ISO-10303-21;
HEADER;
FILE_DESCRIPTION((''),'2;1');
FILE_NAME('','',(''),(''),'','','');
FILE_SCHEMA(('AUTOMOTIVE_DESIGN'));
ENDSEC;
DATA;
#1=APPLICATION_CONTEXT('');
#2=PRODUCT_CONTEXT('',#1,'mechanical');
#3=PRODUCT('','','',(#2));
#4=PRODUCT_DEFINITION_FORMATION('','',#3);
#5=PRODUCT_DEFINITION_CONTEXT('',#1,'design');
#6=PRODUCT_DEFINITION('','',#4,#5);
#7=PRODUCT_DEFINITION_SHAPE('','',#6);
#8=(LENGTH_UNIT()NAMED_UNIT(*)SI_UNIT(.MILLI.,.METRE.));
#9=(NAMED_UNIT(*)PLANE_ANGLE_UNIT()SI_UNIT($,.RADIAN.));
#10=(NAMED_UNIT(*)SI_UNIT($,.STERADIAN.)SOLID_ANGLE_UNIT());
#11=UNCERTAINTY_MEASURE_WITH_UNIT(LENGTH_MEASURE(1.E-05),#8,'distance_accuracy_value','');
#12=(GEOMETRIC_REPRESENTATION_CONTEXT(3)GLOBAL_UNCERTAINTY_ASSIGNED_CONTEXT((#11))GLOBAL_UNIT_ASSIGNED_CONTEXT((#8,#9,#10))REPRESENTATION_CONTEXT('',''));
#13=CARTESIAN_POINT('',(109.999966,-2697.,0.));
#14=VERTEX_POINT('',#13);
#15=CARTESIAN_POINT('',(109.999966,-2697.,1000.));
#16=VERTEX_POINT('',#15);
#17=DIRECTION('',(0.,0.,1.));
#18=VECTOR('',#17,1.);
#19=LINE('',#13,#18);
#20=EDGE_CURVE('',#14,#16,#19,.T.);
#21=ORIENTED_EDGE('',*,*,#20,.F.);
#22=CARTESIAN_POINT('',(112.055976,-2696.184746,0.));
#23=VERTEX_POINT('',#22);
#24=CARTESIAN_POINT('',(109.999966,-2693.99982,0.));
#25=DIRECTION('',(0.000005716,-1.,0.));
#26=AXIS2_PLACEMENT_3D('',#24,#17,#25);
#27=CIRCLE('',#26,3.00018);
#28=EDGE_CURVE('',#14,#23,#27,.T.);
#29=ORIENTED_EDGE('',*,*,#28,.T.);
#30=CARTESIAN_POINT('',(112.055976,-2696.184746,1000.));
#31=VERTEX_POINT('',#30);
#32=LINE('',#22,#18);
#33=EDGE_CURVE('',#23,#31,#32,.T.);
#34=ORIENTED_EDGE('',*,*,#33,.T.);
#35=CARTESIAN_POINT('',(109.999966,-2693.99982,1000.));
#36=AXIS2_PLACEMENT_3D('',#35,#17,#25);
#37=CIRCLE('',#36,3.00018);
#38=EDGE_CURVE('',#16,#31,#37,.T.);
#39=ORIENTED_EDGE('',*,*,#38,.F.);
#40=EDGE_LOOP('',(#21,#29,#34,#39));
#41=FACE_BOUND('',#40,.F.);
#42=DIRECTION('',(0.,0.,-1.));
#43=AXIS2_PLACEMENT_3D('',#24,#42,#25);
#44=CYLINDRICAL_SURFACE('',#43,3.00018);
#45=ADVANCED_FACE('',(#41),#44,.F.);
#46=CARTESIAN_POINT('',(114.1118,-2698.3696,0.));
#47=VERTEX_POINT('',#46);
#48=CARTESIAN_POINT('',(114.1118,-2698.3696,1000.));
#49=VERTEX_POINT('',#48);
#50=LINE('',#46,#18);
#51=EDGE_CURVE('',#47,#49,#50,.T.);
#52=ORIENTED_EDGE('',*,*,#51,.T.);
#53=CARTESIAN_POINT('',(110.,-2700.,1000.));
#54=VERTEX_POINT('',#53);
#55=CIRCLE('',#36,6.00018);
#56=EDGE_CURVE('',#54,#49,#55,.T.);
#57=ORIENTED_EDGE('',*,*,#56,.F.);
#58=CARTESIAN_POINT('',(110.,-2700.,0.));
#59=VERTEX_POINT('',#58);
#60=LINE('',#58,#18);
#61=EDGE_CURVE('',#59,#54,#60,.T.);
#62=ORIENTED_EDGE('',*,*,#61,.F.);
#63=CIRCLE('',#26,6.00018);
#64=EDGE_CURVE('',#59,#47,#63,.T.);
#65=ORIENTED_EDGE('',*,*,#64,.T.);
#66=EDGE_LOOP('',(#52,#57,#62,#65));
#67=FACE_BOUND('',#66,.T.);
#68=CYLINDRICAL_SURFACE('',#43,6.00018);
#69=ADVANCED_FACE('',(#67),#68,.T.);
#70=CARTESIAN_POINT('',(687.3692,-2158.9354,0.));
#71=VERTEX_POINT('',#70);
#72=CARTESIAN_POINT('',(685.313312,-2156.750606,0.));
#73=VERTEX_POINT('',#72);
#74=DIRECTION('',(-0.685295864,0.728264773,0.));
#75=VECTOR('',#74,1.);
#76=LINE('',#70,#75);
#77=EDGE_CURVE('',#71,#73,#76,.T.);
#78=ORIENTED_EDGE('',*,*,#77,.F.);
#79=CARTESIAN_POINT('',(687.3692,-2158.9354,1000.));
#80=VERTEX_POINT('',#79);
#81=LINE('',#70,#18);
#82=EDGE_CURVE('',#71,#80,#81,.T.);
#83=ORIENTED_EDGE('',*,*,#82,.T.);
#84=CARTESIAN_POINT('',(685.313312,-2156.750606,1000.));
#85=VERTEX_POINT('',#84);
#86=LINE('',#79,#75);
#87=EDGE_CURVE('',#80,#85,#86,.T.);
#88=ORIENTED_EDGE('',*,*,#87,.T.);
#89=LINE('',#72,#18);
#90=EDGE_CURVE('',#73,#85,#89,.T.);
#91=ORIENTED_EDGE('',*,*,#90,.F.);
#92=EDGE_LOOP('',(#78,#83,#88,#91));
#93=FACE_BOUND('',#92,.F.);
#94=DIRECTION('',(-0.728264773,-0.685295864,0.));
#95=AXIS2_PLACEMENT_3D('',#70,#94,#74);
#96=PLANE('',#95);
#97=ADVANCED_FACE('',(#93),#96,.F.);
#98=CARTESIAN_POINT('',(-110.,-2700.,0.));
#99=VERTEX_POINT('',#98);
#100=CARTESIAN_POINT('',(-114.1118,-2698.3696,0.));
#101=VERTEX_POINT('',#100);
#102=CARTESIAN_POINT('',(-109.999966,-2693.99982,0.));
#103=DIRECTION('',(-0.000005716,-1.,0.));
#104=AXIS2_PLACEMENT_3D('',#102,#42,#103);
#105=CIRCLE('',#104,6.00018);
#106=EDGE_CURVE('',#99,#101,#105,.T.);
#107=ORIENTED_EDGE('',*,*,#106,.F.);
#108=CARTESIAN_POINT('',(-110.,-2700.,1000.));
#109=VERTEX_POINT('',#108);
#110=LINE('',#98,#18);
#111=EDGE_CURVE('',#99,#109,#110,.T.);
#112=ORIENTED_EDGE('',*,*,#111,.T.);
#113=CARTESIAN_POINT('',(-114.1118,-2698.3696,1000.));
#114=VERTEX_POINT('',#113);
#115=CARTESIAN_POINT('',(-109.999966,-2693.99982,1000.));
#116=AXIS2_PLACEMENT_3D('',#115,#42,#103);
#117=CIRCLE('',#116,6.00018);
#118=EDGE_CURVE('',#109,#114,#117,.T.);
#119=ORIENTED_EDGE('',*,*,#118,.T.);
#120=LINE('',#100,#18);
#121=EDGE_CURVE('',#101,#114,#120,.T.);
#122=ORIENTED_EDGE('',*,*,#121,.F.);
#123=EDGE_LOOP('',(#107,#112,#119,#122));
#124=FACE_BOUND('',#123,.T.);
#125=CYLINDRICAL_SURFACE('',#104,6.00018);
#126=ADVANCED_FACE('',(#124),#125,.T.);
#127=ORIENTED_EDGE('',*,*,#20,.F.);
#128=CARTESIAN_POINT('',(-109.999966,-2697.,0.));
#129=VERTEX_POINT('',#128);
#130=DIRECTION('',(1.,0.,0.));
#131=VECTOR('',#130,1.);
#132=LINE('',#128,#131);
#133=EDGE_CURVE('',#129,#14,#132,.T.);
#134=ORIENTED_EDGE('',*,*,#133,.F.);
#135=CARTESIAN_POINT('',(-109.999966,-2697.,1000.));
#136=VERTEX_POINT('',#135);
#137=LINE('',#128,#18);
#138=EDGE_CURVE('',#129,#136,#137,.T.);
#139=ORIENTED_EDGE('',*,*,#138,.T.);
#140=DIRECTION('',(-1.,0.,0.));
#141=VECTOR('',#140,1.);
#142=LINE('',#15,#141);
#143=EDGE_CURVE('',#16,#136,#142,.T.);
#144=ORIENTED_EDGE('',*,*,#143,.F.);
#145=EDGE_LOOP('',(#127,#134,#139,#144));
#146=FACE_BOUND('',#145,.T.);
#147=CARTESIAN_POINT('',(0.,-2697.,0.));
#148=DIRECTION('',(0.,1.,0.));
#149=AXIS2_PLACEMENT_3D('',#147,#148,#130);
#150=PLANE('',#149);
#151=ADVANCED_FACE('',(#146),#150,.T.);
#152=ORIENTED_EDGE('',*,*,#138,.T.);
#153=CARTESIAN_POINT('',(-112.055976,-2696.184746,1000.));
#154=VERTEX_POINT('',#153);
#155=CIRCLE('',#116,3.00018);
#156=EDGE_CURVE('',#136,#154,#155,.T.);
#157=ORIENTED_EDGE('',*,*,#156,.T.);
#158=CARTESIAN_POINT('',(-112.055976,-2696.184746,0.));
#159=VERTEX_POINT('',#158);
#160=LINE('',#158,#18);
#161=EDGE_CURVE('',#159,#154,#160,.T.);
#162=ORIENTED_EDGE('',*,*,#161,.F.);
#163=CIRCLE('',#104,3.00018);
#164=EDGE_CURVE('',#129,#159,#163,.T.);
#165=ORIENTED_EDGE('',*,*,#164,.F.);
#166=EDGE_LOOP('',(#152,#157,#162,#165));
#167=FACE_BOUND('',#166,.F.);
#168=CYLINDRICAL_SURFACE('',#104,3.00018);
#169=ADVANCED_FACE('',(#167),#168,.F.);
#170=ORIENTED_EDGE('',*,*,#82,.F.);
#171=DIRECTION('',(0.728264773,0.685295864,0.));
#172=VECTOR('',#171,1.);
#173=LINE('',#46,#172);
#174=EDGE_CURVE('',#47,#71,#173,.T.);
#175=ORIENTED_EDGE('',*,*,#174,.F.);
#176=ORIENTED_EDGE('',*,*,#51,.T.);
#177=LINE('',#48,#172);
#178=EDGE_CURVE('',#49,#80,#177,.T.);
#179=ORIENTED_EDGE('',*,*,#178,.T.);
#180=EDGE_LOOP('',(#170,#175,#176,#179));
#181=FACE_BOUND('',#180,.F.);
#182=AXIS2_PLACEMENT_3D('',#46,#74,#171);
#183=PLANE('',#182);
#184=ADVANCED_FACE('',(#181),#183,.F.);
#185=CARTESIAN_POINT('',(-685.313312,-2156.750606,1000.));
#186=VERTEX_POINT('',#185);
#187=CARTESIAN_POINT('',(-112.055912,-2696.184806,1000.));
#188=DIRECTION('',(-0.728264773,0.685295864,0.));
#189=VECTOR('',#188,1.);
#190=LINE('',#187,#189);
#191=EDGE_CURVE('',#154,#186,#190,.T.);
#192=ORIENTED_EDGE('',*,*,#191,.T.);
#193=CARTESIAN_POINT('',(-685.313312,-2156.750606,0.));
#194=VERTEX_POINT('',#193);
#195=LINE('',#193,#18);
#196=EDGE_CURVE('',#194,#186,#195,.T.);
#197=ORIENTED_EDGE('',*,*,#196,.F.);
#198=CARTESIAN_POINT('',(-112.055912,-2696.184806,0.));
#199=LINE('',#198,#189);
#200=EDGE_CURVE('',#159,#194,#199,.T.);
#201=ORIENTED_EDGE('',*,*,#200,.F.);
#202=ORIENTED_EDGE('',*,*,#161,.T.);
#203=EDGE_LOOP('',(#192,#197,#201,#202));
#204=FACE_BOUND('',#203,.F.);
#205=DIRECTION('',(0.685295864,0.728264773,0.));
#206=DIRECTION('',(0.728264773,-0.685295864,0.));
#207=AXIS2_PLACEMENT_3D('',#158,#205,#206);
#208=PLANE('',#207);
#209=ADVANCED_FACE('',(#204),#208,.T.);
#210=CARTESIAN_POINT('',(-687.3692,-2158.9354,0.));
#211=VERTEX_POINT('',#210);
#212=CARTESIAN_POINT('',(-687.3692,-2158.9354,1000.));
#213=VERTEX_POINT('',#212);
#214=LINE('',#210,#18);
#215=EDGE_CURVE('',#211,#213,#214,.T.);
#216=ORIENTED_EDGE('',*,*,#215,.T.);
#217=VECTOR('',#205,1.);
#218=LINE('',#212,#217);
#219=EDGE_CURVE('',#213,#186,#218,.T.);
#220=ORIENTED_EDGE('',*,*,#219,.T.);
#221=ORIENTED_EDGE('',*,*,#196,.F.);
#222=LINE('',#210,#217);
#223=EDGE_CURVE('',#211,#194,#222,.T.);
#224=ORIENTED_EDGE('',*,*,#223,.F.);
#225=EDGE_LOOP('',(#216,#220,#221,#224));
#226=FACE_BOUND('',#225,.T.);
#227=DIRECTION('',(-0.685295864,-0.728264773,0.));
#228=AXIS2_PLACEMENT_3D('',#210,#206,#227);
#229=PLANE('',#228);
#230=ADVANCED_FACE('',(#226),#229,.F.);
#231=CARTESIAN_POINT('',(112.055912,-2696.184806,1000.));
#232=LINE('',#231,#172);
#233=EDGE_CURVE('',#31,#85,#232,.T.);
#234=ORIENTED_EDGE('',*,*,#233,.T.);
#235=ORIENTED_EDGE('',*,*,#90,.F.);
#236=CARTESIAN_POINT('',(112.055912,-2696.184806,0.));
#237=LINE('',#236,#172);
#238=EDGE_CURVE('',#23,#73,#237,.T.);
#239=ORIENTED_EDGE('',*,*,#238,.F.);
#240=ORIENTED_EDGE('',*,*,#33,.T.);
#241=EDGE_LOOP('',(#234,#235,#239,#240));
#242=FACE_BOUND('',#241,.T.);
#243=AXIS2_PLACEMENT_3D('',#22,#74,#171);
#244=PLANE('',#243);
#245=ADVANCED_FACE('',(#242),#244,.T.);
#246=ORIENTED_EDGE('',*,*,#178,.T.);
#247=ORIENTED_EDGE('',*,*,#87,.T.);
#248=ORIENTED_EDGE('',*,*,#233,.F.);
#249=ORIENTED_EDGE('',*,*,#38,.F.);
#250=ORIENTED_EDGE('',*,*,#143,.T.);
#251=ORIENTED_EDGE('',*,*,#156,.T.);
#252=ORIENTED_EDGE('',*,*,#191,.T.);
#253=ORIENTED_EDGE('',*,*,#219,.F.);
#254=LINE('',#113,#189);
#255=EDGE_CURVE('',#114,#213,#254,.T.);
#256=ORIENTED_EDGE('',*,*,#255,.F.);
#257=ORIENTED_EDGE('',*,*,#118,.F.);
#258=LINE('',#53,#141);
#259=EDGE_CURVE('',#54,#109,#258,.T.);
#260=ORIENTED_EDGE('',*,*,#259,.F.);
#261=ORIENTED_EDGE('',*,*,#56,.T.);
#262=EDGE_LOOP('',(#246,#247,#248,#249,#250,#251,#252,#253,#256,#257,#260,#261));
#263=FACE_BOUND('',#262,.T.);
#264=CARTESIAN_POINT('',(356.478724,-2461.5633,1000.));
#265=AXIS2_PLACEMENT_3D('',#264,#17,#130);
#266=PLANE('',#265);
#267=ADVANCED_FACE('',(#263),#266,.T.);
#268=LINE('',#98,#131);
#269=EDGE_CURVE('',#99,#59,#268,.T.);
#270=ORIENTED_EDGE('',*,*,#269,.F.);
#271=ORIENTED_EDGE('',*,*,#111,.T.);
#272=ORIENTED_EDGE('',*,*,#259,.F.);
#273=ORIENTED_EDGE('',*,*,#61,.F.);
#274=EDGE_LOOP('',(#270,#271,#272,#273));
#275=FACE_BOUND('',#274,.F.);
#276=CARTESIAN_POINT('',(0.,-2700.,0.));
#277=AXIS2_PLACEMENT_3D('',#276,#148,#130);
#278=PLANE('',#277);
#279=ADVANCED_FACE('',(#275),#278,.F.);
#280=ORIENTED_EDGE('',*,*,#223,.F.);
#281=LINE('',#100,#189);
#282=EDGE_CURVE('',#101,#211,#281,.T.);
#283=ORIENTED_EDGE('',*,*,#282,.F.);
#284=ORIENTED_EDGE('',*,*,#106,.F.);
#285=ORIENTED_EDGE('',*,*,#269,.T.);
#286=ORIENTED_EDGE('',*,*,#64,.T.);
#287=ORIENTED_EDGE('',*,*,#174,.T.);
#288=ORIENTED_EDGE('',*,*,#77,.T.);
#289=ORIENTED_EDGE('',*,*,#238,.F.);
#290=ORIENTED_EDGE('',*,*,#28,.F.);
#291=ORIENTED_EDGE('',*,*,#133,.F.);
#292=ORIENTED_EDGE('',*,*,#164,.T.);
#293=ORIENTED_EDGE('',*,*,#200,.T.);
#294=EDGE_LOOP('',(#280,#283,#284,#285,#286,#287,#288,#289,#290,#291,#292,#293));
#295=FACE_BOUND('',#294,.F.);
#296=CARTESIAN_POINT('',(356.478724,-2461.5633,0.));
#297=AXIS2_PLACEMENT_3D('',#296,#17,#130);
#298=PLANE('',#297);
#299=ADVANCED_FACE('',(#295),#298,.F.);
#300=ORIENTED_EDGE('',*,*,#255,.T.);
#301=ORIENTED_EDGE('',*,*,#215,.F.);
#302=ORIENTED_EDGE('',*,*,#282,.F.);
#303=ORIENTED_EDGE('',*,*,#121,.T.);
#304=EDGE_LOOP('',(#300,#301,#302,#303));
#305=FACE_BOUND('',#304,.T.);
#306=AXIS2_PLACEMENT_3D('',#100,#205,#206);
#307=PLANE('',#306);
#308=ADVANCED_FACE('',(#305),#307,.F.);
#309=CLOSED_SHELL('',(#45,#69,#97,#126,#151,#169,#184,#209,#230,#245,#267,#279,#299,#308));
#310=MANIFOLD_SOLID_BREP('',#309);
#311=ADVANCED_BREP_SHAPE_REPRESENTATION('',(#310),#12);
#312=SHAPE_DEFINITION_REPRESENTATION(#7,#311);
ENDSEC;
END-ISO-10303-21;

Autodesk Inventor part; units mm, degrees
ref_plane "YZ Plane" through (0, 0, 0) normal (1, 0, 0) x (0, 1, 0)
ref_plane "XZ Plane" through (0, 0, 0) normal (0, 1, 0) x (-1, 0, 0)
ref_plane "XY Plane" through (0, 0, 0) normal (0, 0, 1) x (1, 0, 0)
sketch "Sketch1" plane through (0, 0, 0) normal (0, 0, 1) x (1, 0, 0)
  line L0 (-750, 0) -> (750, 0) construction
  line L1 (750, 0) -> (750, -2700) construction
  line L2 (750, -2700) -> (-750, -2700) construction
  line L3 (-750, -2700) -> (-750, 0) construction
  line L4 (800, 50) -> (-800, 50) construction
  line L5 (-800, 50) -> (-800, -2750) construction
  line L6 (-800, -2750) -> (800, -2750) construction
  line L7 (800, -2750) -> (800, 50) construction
  line L8 (-850, 100) -> (850, 100) construction
  line L9 (850, 100) -> (850, -2800) construction
  line L10 (850, -2800) -> (-850, -2800) construction
  line L11 (-850, -2800) -> (-850, 100) construction
  arc A0 (750, 0) -> (745.2706, 0.6314) centre (0, -5600) ccw construction
  line L12 (-750, -2100) -> (750, -2100) construction
  line L13 (114.1118, -2698.3696) -> (687.3692, -2158.9354)
  arc A1 (750, -2100) -> (768.2917, -213.4901) centre (-10250, -1050) ccw construction
  line L14 (750, 0) -> (749.6018, -2.9735) construction
  arc A2 (750, -3.0268) -> (0, 47) centre (-0.2, -5603) ccw construction
  line L15 (750, 0) -> (747.0136, -0.2851) construction
  arc A3 (767.1641, -238.6409) -> (747.4657, -5.0326) centre (-10252.9895, -1050.2527) ccw construction
  arc A4 (750.4522, -4.7486) -> (745.2706, 0.6314) centre (744.4791, -5.3162) ccw construction
  arc A5 (747.4657, -5.0326) -> (744.8748, -2.3426) centre (744.4792, -5.3164) ccw construction
  line L16 (750, -2100) -> (752.9864, -2100.2851) construction
  arc A6 (752.9864, -2100.2851) -> (771.2831, -213.263) centre (-10246.9891, -1050.0292) ccw construction
  line L17 (750, -2100) -> (752.0559, -2102.1848) construction
  line L18 (752.0559, -2102.1848) -> (752.0559, -2102.1848) construction
  arc A7 (749.1768, -2100.7746) -> (750.1074, -2098.8746) centre (747.1209, -2098.5898) ccw construction
  line L19 (0, -2697) -> (110, -2697) construction
  line L20 (112.0559, -2696.1848) -> (685.3133, -2156.7506) construction
  arc A8 (110, -2700) -> (114.1118, -2698.3696) centre (110, -2694) ccw
  arc A9 (110, -2697) -> (112.0559, -2696.1848) centre (110, -2694) ccw construction
  line L21 (685.3133, -2156.7506) -> (687.3692, -2158.9354) construction
  line L22 (752.0559, -2102.1848) -> (671.2185, -2178.2526) construction
  line L23 (671.2185, -2178.2526) -> (669.1626, -2176.0678) construction
  arc A10 (747.4657, -5.0326) -> (747.0136, -0.2851) centre (-10252.9895, -1050.2527) ccw construction
  arc A11 (745.2706, 0.6314) -> (0, 50) centre (0, -5600) ccw construction
  arc A12 (750.4522, -4.7486) -> (750, 0) centre (-10250, -1050) ccw construction
  line L24 (770.156, -238.4205) -> (767.1641, -238.6409) construction
  line L25 (768.2917, -213.4901) -> (771.2831, -213.263) construction
  arc A13 (768.2917, -213.4901) -> (750.4522, -4.7486) centre (-10250, -1050) ccw construction
  line L26 (0, 100) -> (0, 50) construction
  line L27 (0, -2700) -> (0, -2697) construction
  line L28 (0, 47) -> (0, 0) construction
  line L29 (0, 50) -> (0, 47) construction
  arc A14 (752.0559, -2102.1848) -> (752.9864, -2100.2851) centre (749.9983, -2099.9992) ccw construction
  line L30 (0, -2700) -> (110, -2700)
  line L31 (687.3692, -2158.9354) -> (750, -2100) construction
  point P0 (0, -2750)
  dimension "d19" = 1500
  dimension "d20" = 2700
  dimension "d21" = 2100
  dimension "d22" = 6
  dimension "d23" = 3
  dimension "d24" = 3
  dimension "d25" = 6
  dimension "d26" = 3
  dimension "d27" = 239.271
  dimension "d28" = 50
  dimension "d29" = 50
  dimension "d30" = 3
  dimension "d31" = 25
  dimension "d32" = 110
  dimension "d33" = 25
  dimension "d34" = 111
contour flange "Contour Flange1" sketch "Sketch1" thickness 3 bend radius 3 width 1000 along (0, 0, 1) mid plane no both sides no wall seen from (55, -2700, 0) lies toward (0, 1, 0) curves L30 A8 L13
bend "Bend1"
corner "Corner1"
mirror "Mirror1" about plane through (0, 0, 0) normal (1, 0, 0)
equation "\"d19\" = Бак_ширина_общая"
equation "\"d20\" = Бак_высота_общая"
equation "\"d21\" = Бак_высота_до_конуса"
equation "\"d22\" = Thickness + BendRadius"
equation "\"d23\" = Thickness"
equation "\"d24\" = Thickness"
equation "\"d25\" = Thickness + BendRadius"
equation "\"d26\" = Thickness"
equation "\"d27\" = Бак_спина_длина_фланцев"
equation "\"d30\" = d40"
equation "\"d31\" = Бак_нахлест_фланца"
equation "\"d32\" = 0.5 * Бак_брюхо_ширина_полки"
equation "\"d33\" = Бак_нахлест_фланца"
equation "\"d34\" = Бак_борт_длина_фланца"
equation "\"d7\" = Thickness"
equation "\"d8\" = BendReliefWidth"
equation "\"d9\" = BendReliefDepth"
equation "\"d10\" = MinimumRemnant"
equation "\"d11\" = TransitionRadius"
equation "\"d13\" = BendRadius"
equation "\"d15\" = CornerReliefSize"
equation "\"d16\" = GapSize"
equation "\"d17\" = JacobiRadiusSize"
equation "\"BendRadius\" = Thickness"
equation "\"BendReliefWidth\" = Thickness"
equation "\"BendReliefDepth\" = 0.5 * Thickness"
equation "\"CornerReliefSize\" = 4 * Thickness"
equation "\"MinimumRemnant\" = 2 * Thickness"
equation "\"TransitionRadius\" = BendRadius"
equation "\"JacobiRadiusSize\" = BendRadius"
equation "\"GapSize\" = Thickness"
equation "\"d38\" = d40 + d44"
equation "\"d39\" = d40"
equation "\"d44\" = d40"
equation "\"Бак_ширина_общая\" = 1500"
equation "\"Бак_высота_общая\" = 2700"
equation "\"Бак_высота_до_конуса\" = 2100"
equation "\"Thickness\" = 3"
equation "\"Бак_спина_длина_фланцев\" = 239.271"
equation "\"d40\" = 3"
equation "\"Бак_нахлест_фланца\" = 25"
equation "\"Бак_брюхо_ширина_полки\" = 220"
equation "\"Бак_борт_длина_фланца\" = 111"
properties part number "МОО 041 sheet брюхо основной" material "Stainless Steel"
